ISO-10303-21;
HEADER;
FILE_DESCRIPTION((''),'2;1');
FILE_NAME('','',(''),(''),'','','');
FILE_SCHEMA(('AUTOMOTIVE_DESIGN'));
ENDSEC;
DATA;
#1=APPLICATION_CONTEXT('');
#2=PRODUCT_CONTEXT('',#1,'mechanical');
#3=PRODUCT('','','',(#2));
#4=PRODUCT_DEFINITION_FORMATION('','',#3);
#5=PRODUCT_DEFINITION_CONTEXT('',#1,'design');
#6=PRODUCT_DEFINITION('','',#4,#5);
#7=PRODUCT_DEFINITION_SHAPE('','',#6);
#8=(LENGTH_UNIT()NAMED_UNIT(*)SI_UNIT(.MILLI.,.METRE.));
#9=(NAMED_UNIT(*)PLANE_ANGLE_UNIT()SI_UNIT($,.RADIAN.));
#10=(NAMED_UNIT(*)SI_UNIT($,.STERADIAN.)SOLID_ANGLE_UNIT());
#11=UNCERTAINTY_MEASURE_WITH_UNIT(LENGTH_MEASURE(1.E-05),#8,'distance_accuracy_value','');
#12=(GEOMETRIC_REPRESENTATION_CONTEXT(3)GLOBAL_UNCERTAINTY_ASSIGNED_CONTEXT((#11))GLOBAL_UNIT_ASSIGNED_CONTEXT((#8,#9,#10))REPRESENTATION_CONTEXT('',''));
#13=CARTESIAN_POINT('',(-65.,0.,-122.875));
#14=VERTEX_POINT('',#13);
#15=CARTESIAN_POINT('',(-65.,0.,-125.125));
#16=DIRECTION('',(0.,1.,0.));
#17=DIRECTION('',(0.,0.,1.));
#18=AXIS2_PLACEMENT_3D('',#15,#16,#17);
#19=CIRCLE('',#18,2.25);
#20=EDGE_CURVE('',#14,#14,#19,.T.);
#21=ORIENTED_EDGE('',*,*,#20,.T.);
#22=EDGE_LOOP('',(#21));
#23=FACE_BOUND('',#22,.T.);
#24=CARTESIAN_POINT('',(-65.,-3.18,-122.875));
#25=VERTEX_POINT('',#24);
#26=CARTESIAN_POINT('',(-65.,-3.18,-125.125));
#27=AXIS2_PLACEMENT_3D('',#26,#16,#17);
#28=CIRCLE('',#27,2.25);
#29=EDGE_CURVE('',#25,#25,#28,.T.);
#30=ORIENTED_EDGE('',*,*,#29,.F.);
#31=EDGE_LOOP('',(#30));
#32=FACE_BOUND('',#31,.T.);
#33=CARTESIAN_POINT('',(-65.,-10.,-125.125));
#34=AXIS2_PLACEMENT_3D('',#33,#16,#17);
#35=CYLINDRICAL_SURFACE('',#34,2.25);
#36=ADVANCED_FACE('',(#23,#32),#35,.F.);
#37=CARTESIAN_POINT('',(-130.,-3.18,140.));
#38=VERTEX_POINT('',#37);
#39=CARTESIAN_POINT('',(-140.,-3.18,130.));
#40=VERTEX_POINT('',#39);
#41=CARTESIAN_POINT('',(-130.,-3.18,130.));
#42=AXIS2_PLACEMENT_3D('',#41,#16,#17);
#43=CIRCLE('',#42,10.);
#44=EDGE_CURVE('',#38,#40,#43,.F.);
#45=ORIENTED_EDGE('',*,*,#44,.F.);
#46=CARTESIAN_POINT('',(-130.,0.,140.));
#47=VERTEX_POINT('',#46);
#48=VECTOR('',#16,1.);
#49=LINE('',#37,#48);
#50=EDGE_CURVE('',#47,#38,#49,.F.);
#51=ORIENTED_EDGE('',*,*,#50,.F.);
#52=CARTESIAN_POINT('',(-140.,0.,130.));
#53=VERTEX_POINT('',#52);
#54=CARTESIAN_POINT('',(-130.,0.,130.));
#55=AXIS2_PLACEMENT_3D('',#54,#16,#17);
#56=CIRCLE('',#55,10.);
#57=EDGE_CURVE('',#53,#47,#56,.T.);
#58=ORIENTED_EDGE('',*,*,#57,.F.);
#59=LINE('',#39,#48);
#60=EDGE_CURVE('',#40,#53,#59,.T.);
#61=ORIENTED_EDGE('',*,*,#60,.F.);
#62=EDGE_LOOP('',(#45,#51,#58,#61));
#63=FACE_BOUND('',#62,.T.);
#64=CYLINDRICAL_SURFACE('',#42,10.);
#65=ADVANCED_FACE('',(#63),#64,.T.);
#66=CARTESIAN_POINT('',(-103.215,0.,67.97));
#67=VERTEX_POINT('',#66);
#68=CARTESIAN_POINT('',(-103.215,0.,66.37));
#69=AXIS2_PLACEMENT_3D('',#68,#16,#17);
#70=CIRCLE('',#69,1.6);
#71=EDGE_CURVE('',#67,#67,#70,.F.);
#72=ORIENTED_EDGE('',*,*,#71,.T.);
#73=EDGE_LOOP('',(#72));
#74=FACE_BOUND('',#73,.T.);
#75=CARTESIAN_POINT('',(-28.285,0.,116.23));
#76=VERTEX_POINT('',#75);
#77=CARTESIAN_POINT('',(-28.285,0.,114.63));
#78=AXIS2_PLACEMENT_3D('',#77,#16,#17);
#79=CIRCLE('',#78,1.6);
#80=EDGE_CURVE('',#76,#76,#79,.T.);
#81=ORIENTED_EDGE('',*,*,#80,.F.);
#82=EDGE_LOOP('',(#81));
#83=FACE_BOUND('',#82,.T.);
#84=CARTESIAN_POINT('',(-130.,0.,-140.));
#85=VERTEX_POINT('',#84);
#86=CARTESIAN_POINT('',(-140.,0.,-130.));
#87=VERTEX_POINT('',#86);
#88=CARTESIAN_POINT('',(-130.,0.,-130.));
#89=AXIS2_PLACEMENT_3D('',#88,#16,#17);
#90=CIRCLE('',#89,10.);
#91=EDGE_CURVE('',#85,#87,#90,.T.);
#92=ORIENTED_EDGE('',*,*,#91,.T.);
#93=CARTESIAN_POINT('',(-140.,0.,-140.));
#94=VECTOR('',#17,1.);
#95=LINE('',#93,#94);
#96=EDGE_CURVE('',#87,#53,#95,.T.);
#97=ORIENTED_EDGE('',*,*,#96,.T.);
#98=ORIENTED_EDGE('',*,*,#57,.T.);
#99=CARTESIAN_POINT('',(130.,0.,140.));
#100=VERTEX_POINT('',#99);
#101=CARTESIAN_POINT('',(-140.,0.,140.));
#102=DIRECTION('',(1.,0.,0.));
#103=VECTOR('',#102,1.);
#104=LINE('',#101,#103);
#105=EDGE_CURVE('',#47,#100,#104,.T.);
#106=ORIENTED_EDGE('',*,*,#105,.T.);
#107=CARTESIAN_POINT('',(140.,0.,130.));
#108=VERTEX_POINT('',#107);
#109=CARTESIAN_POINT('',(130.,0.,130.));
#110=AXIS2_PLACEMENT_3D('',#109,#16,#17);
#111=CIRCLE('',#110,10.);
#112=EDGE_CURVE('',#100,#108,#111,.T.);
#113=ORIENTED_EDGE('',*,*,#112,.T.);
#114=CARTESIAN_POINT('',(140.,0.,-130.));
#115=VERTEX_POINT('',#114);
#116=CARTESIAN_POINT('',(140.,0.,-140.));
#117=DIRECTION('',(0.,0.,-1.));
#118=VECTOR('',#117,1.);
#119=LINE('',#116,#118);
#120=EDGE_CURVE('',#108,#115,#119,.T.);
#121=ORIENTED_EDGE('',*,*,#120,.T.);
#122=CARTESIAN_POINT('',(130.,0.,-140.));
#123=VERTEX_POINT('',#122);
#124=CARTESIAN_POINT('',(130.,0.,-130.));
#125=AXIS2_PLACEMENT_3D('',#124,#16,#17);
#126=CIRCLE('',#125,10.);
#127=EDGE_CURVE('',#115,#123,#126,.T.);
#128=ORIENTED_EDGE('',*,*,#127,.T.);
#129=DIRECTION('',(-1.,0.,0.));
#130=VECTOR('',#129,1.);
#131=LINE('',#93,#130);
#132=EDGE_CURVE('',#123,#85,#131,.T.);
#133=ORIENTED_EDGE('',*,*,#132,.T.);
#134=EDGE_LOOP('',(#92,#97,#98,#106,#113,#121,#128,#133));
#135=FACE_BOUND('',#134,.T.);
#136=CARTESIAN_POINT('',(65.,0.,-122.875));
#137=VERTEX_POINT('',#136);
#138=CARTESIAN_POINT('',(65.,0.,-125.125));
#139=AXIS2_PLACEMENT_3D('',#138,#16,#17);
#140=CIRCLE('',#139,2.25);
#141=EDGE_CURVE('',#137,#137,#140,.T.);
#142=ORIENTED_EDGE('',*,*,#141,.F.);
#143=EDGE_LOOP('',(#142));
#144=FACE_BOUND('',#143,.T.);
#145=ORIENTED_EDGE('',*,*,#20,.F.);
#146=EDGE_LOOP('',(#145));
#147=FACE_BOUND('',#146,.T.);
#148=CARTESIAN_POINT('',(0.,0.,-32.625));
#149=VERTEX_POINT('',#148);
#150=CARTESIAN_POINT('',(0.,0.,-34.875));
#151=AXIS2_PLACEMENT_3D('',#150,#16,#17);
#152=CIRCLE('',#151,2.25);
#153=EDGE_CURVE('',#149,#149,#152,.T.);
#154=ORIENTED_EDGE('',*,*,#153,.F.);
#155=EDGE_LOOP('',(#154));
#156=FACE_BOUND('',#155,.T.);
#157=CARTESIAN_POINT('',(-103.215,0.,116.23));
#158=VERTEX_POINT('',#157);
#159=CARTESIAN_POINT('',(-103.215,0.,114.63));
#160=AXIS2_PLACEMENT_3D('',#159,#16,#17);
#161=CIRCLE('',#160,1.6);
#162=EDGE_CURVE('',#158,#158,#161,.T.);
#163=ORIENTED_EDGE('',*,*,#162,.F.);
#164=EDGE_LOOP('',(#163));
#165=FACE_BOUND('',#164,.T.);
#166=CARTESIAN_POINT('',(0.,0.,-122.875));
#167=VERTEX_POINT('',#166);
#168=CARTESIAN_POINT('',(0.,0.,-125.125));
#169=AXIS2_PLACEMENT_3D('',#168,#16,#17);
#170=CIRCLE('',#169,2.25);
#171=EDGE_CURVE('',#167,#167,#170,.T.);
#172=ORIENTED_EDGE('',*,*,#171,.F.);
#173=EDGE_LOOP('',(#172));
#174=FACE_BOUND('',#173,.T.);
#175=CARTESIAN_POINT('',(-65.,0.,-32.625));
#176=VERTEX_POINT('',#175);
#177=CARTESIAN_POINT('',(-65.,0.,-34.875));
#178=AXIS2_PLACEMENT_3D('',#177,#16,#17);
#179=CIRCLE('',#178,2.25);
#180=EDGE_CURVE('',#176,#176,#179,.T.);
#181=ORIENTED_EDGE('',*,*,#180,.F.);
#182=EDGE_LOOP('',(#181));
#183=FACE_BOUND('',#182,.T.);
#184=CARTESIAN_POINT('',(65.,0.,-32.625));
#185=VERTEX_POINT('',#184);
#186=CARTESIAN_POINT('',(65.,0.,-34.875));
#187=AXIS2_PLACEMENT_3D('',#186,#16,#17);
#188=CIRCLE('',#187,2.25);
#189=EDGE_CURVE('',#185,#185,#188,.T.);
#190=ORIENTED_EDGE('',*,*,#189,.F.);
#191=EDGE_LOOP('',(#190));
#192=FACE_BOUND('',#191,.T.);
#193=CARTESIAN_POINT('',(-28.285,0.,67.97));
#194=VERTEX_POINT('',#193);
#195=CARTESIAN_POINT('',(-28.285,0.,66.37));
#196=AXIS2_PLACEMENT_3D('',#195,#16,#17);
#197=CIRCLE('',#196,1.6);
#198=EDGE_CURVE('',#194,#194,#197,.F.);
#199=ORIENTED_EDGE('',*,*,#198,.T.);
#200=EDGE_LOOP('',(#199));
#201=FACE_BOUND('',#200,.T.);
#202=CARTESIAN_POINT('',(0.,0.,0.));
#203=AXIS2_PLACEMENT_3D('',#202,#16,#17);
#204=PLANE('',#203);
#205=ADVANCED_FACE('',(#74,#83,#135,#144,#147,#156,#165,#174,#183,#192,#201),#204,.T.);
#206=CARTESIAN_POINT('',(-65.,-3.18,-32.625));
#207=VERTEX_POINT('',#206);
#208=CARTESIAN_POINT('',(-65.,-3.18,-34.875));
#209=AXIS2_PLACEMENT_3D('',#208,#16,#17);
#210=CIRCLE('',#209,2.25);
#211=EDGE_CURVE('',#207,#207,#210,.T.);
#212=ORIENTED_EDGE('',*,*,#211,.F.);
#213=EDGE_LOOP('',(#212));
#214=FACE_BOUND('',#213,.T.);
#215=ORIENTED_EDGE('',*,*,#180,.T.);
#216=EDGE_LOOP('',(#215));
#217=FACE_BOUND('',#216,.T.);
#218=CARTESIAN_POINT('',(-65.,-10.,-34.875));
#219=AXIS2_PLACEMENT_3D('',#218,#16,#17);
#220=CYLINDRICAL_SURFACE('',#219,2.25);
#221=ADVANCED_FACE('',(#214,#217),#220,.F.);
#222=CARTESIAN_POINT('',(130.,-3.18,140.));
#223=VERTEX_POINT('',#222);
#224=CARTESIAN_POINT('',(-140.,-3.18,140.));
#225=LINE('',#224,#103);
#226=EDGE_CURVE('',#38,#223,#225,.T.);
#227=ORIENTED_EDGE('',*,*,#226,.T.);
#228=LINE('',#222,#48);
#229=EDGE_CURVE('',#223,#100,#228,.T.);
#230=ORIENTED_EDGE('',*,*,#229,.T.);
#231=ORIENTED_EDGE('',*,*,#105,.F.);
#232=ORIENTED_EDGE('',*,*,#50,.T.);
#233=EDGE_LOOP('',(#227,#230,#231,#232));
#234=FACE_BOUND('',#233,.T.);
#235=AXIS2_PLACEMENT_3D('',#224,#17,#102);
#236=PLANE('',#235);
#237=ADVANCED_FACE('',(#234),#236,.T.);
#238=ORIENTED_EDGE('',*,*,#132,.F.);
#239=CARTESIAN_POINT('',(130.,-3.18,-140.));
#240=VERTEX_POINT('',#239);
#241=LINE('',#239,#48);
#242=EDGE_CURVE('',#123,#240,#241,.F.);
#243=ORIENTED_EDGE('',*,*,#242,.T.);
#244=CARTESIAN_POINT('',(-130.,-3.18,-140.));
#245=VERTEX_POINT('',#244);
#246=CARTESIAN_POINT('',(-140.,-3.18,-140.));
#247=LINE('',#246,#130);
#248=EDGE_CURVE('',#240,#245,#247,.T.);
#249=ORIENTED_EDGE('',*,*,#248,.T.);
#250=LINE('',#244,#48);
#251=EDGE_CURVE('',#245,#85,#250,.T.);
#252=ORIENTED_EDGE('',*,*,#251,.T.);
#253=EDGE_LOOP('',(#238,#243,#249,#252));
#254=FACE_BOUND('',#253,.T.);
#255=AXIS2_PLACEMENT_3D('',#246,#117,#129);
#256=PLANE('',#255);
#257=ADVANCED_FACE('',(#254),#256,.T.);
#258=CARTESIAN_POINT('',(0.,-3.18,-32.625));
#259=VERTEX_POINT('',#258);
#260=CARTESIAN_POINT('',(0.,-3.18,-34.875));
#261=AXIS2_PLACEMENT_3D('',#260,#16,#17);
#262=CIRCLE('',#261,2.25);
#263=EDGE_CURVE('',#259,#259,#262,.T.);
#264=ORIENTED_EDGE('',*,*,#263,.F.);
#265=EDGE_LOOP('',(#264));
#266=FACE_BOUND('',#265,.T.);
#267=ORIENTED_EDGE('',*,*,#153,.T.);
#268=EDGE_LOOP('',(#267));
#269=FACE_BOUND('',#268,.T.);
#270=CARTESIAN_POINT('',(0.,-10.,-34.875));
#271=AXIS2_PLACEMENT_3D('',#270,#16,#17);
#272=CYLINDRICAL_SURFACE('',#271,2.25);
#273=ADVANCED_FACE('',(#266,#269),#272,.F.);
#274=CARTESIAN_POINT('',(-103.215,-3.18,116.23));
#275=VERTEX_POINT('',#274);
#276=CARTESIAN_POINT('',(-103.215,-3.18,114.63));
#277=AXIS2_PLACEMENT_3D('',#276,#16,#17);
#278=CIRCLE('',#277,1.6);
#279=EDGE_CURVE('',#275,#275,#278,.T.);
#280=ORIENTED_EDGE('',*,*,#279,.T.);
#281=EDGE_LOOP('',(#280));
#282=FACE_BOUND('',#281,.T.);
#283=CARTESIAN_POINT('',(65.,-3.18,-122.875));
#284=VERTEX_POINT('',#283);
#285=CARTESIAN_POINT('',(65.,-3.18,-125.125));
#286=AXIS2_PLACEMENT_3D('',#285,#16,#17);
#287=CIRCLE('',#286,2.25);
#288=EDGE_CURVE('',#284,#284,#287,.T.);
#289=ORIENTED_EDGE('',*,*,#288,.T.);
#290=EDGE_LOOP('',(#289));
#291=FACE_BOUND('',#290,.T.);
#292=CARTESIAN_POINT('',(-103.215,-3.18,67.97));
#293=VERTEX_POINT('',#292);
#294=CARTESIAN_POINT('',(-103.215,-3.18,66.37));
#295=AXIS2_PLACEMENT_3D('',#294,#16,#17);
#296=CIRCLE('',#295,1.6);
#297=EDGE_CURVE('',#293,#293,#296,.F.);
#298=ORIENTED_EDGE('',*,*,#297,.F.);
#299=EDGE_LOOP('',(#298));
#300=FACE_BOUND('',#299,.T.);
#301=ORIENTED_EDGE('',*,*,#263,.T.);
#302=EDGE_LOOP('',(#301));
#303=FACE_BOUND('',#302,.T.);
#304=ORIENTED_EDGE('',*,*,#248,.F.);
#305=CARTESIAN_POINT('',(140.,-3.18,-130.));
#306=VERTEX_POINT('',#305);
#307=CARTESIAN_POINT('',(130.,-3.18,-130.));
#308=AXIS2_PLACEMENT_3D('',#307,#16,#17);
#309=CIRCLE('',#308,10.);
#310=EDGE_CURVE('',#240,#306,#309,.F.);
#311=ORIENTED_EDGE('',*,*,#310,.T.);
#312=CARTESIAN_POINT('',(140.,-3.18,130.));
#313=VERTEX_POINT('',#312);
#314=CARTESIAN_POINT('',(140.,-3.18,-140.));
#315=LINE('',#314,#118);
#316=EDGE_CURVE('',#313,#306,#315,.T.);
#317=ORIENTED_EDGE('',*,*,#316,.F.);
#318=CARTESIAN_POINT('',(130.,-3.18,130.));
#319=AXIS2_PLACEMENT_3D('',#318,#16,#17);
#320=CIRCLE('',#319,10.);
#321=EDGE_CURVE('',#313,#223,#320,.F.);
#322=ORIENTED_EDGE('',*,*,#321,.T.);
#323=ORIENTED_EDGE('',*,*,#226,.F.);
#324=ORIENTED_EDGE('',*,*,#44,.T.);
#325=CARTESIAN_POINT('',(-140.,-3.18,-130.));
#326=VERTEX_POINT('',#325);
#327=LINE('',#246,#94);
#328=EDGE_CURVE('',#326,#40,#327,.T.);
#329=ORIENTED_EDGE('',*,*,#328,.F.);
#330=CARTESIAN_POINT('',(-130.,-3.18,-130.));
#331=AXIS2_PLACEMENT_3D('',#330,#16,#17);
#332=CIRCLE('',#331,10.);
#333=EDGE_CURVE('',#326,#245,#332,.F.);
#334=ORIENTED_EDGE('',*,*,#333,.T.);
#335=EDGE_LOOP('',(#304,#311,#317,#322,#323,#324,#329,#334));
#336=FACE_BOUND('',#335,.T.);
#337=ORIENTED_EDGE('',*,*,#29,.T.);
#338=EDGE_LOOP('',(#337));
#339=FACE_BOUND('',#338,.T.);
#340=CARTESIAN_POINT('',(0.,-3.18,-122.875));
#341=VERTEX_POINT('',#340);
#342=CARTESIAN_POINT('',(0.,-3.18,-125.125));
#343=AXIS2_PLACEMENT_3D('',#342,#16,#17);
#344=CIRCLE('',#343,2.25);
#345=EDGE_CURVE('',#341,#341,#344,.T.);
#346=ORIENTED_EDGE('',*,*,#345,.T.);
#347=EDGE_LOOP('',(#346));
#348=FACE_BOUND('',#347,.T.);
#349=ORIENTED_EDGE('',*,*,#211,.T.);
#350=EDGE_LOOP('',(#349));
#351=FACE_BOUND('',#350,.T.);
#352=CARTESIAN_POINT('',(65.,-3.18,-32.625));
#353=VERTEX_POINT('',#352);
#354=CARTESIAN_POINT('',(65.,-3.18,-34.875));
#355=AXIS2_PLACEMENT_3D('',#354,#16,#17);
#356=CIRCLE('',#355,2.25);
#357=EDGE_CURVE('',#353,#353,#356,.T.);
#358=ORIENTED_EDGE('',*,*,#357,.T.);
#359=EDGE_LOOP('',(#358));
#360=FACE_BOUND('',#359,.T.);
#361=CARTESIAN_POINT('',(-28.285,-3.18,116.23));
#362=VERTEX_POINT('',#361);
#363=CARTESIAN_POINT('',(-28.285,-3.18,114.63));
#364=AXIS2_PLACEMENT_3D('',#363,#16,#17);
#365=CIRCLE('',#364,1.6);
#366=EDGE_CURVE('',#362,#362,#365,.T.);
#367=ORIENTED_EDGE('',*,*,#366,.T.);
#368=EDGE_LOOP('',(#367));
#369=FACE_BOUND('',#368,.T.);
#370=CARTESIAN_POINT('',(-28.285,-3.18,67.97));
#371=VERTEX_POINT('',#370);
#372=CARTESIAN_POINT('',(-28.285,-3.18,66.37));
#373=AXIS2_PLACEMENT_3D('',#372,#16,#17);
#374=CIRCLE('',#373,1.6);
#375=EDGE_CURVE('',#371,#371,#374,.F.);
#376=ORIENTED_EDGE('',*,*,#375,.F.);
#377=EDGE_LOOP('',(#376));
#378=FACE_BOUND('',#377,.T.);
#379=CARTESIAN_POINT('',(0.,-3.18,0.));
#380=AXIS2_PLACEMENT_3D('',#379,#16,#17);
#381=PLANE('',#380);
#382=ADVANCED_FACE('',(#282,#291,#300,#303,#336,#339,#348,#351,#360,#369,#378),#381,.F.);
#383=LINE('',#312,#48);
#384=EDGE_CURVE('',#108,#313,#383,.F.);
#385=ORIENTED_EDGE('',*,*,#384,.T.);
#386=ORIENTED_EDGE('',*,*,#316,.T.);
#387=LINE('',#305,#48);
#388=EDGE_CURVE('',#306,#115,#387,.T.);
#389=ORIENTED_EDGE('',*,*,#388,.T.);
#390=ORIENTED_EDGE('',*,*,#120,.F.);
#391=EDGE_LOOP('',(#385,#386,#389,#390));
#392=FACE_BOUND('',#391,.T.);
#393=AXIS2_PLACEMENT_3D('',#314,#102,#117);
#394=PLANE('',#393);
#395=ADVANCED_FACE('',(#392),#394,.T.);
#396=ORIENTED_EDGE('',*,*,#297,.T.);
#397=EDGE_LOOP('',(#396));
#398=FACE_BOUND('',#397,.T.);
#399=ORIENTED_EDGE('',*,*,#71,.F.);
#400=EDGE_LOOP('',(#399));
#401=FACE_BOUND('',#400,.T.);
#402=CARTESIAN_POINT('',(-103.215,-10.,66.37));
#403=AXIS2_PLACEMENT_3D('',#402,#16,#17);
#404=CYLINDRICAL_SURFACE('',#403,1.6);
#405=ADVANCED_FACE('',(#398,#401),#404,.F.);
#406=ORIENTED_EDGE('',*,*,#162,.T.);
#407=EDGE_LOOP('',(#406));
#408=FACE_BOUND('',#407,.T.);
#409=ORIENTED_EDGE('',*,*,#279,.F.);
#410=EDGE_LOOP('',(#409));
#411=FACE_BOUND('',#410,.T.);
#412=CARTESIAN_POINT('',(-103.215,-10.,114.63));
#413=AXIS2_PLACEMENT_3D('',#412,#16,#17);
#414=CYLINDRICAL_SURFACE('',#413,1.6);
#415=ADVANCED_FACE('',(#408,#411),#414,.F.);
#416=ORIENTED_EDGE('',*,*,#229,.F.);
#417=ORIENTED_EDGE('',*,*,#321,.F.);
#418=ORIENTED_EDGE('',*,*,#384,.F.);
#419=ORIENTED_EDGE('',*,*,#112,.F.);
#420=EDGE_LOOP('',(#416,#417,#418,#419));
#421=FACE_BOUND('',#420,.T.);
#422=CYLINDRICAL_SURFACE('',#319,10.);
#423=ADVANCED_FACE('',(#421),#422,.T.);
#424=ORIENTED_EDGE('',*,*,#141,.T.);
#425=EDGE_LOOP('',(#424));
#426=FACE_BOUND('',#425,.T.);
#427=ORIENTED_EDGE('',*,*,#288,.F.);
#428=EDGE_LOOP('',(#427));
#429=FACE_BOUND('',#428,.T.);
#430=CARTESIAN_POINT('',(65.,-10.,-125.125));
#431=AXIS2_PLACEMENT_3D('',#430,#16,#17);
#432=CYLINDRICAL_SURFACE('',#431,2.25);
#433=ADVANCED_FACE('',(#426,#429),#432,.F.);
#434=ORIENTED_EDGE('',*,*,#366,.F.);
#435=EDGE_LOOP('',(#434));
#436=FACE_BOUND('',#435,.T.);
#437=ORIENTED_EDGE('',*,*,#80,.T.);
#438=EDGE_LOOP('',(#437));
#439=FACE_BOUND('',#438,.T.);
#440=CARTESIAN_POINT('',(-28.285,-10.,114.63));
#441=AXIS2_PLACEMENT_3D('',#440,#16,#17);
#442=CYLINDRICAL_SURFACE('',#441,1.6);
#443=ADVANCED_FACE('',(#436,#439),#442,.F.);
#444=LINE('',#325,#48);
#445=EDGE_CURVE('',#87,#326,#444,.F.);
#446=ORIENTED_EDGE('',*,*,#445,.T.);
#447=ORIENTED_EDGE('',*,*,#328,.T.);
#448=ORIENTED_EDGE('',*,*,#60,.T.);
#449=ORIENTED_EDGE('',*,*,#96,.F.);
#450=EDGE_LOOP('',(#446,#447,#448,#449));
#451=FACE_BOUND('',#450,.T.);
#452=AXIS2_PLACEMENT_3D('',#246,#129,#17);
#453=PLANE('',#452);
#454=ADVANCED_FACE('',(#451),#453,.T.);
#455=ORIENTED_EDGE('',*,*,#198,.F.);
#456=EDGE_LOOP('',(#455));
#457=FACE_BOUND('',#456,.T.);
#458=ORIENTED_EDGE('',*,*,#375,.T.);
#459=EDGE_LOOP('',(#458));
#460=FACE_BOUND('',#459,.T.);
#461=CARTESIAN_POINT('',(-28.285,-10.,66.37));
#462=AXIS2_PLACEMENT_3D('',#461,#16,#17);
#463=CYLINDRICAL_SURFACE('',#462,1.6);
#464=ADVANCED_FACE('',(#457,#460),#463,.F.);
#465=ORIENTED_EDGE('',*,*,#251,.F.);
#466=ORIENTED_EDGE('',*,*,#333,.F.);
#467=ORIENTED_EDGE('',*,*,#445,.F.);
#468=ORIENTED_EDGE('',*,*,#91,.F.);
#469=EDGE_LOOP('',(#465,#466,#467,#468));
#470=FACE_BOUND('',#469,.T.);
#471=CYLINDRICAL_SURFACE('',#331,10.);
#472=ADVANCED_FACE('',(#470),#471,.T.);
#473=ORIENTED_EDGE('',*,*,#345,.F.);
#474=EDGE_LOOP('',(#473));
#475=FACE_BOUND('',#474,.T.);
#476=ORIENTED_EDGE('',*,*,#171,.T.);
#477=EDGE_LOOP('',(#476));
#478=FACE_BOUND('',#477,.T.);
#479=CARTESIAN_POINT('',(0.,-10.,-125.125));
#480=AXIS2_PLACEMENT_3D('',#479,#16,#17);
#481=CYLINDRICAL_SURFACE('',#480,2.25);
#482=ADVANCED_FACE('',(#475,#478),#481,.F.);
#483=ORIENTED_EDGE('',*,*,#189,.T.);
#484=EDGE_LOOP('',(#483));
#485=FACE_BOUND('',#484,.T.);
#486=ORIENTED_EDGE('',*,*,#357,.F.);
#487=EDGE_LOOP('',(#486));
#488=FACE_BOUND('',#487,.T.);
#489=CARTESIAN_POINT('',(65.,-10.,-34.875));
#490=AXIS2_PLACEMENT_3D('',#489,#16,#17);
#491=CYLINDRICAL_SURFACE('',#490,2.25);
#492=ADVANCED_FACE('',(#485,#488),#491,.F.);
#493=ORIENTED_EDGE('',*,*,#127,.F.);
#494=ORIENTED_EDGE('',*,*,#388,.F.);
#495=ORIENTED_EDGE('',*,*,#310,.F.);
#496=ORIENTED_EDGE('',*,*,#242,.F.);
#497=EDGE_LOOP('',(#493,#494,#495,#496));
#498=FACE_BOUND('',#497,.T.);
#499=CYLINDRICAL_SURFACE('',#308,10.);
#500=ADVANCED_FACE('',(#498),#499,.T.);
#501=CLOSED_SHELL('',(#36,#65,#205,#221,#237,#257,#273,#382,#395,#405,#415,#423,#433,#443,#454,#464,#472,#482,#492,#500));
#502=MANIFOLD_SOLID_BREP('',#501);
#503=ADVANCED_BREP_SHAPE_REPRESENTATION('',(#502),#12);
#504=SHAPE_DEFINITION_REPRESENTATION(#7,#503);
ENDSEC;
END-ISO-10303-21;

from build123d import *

# Parameters (mm, degrees)
SKETCH1_W          = 280
SKETCH1_H          = 280
BASE_FLANGE1_DEPTH = 3.18
SKETCH6_R          = 2.25
SKETCH6_R_2        = 1.6
CUT_EXTRUDE1_DEPTH = 10
FILLET1_R          = 10


# Sheet-metal steps are written as plain solids
with BuildPart() as part:
    # Sketch1 → Base-Flange1 (new body)
    with BuildSketch(Plane(origin=(0, 0, 0), x_dir=(1, 0, 0), z_dir=(0, 1, 0))):
        Rectangle(SKETCH1_W, SKETCH1_H)
    extrude(amount=-BASE_FLANGE1_DEPTH)

    # Sketch6 → Cut-Extrude1 (cut)
    with BuildSketch(Plane(origin=(0, 0, 0), x_dir=(1, 0, 0), z_dir=(0, 1, 0))):
        with Locations(Location((0, 125.125, 0), (0, 0, 270))):
            Circle(SKETCH6_R)
        with Locations(Location((0, 34.875, 0), (0, 0, 270))):
            Circle(SKETCH6_R)
        with Locations(Location((65, 34.875, 0), (0, 0, 270))):
            Circle(SKETCH6_R)
        with Locations(Location((65, 125.125, 0), (0, 0, 270))):
            Circle(SKETCH6_R)
        with Locations(Location((-103.215, -114.63, 0), (0, 0, 270))):
            Circle(SKETCH6_R_2)
        with Locations(Location((-28.285, -114.63, 0), (0, 0, 270))):
            Circle(SKETCH6_R_2)
        with Locations(Location((-28.285, -66.37, 0), (0, 0, 270))):
            Circle(SKETCH6_R_2)
        with Locations(Location((-103.215, -66.37, 0), (0, 0, 270))):
            Circle(SKETCH6_R_2)
        with Locations(Location((-65, 34.875, 0), (0, 0, 270))):
            Circle(SKETCH6_R)
        with Locations(Location((-65, 125.125, 0), (0, 0, 270))):
            Circle(SKETCH6_R)
    extrude(amount=-CUT_EXTRUDE1_DEPTH, mode=Mode.SUBTRACT)

    # Fillet1
    fillet1_edges = [part.edges().sort_by_distance(p)[0] for p in [
        (140, -1.59, 140),
        (-140, -1.59, 140),
        (-140, -1.59, -140),
        (140, -1.59, -140),
    ]]
    fillet(fillet1_edges, radius=FILLET1_R)


solid = part.part
